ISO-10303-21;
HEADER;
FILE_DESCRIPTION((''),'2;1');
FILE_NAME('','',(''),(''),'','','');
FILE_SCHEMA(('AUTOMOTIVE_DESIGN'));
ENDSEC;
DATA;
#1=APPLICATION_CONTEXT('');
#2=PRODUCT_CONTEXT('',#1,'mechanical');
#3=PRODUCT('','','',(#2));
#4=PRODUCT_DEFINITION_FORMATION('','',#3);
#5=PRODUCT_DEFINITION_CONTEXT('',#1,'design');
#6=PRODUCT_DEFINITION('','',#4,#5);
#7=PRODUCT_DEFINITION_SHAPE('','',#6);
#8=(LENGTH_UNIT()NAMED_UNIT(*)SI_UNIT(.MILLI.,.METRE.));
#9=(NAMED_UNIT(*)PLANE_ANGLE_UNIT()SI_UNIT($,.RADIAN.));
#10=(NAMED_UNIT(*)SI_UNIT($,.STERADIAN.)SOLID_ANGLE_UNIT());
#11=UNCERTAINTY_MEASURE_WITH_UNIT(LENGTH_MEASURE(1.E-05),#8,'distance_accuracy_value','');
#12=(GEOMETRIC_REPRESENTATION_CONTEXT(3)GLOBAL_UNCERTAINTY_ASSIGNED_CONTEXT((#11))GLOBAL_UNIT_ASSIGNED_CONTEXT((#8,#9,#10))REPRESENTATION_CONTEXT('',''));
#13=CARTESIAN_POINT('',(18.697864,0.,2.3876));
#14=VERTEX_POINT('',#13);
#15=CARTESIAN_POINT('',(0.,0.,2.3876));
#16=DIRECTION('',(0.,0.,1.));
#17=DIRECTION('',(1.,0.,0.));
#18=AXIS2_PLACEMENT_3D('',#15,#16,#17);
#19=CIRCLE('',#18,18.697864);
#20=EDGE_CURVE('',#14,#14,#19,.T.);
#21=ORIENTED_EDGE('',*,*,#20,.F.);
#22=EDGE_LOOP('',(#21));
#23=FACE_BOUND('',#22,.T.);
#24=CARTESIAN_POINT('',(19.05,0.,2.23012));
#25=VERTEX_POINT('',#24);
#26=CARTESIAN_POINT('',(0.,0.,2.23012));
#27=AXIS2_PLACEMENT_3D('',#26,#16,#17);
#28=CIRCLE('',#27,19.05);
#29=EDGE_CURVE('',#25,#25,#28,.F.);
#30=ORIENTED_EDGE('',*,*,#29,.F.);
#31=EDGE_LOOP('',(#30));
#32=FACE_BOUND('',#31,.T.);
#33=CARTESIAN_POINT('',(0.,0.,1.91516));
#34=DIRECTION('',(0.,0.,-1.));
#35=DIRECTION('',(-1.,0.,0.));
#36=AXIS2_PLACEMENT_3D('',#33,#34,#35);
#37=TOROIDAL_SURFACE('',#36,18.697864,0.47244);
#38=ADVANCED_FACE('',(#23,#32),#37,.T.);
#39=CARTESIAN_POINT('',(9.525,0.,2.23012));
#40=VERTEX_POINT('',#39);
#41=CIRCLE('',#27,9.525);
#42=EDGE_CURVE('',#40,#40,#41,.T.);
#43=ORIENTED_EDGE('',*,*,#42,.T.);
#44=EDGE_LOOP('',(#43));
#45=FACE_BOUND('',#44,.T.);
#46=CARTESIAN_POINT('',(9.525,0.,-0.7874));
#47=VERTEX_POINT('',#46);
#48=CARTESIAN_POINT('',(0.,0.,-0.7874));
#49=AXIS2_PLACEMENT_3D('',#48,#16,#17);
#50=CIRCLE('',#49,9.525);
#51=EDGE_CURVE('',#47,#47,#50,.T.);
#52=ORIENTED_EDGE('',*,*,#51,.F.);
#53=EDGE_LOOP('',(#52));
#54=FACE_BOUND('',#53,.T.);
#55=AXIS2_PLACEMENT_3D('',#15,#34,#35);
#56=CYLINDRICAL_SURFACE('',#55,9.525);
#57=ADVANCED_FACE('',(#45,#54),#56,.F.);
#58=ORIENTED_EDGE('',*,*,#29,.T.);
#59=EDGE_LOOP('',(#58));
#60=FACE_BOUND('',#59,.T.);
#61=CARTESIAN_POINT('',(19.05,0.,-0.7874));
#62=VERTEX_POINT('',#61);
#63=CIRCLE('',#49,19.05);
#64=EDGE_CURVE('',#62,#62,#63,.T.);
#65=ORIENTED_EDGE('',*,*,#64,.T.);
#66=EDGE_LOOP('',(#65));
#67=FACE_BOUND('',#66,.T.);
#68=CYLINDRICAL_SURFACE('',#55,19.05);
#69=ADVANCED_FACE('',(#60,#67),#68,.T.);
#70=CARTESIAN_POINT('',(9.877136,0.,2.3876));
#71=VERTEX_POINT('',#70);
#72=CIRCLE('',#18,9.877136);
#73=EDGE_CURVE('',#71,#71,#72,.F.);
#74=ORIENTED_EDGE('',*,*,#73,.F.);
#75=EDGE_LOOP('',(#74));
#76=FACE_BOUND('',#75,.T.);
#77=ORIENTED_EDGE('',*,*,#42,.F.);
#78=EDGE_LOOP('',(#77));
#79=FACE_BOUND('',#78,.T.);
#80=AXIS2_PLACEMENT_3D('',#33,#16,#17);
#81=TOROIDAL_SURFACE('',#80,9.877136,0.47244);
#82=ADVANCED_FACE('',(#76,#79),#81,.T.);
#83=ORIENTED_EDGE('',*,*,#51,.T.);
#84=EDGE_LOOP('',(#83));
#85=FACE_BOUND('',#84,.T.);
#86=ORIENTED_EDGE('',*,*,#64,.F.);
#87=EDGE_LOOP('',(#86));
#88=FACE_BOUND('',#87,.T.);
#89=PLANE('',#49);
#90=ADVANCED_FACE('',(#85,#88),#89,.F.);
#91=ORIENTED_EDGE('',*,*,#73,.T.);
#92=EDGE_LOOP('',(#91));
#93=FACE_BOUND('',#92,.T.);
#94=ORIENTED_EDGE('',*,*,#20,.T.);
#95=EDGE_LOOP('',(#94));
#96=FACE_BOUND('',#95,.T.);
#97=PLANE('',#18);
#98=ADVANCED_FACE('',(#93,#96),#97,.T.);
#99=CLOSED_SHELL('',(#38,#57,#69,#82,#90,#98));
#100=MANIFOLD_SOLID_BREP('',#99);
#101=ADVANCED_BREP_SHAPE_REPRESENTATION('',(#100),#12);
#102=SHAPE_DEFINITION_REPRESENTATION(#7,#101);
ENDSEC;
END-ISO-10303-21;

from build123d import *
from OCP.BRepFilletAPI import BRepFilletAPI_MakeChamfer

# Parameters (mm, degrees)
BOSS_EXTRUDE1_START = -0.7874
SKETCH3_R           = 19.05
SKETCH3_R_2         = 9.525
BOSS_EXTRUDE1_DEPTH = 3.175
CHAMFER1_SIZE       = 0.15748
CHAMFER1_SIZE2      = 0.09092112
FILLET1_R           = 0.47244


with BuildPart() as part:
    # Sketch3 → Boss-Extrude1 (new body)
    with BuildSketch(Plane.XY.offset(BOSS_EXTRUDE1_START)):
        Circle(SKETCH3_R)
        Circle(SKETCH3_R_2, mode=Mode.SUBTRACT)
    extrude(amount=BOSS_EXTRUDE1_DEPTH)

    # Chamfer1: one chamfer whose edges measure the first distance from different faces: ONE call of the kernel's chamfer builder (chamfer() names one face for all edges)
    chamfer1_edges_1 = [part.edges().sort_by_distance(p)[0] for p in [
        (-19.05, 0, 2.3876),
    ]]
    chamfer1_side_1 = [part.faces().sort_by_distance(p)[0] for p in [
        (-19.05, 0, 0.8001),
    ]]
    chamfer1_edges_2 = [part.edges().sort_by_distance(p)[0] for p in [
        (-9.525, 0, 2.3876),
    ]]
    chamfer1_side_2 = [part.faces().sort_by_distance(p)[0] for p in [
        (-9.525, 0, 0.8001),
    ]]
    chamfer1 = BRepFilletAPI_MakeChamfer(part.part.solid().wrapped)
    for e in chamfer1_edges_1:
        chamfer1.Add(CHAMFER1_SIZE, CHAMFER1_SIZE2, e.wrapped, chamfer1_side_1[0].wrapped)  # the first distance lies on this face
    for e in chamfer1_edges_2:
        chamfer1.Add(CHAMFER1_SIZE, CHAMFER1_SIZE2, e.wrapped, chamfer1_side_2[0].wrapped)  # the first distance lies on this face
    add(Compound.cast(chamfer1.Shape()), mode=Mode.REPLACE)

    # Fillet1
    # the kernel refuses this fillet: 0.47244 mm, written as the material it takes off along each edge
    with BuildSketch(Plane(origin=(0, 0, 2.3876), x_dir=(1, 0, 0), z_dir=(0, -1, 0))) as fillet1_piece_1:
        with BuildLine():
            CenterArc((18.697864015, -0.47244), FILLET1_R, 41.810314896, 48.189685104)
            Line((18.697864015, 0), (18.697864015, 0.0094488))
            Line((18.697864015, 0.0094488), (18.95907888, 0.0094488))
            Line((18.95907888, 0.0094488), (18.96726178, 0.0047244))
            ThreePointArc((18.96726178, 0.0047244), (19.012722341, -0.0740156), (19.05704272, -0.1511808))
            Line((19.05704272, -0.1511808), (19.05, -0.15748))
        make_face()
    revolve(axis=Axis((0, 0, 2.3876), (0, 0, 1)), mode=Mode.SUBTRACT)
    with BuildSketch(Plane(origin=(0, 0, 2.3876), x_dir=(1, 0, 0), z_dir=(0, -1, 0))) as fillet1_piece_2:
        with BuildLine():
            CenterArc((9.877135985, -0.47244), FILLET1_R, 90, 48.189685104)
            Line((9.525, -0.15748), (9.51795728, -0.1511808))
            ThreePointArc((9.51795728, -0.1511808), (9.562277659, -0.0740156), (9.60773822, 0.0047244))
            Line((9.60773822, 0.0047244), (9.61592112, 0.0094488))
            Line((9.61592112, 0.0094488), (9.877135985, 0.0094488))
            Line((9.877135985, 0.0094488), (9.877135985, 0))
        make_face()
    revolve(axis=Axis((0, 0, 2.3876), (0, 0, 1)), mode=Mode.SUBTRACT)


solid = part.part
